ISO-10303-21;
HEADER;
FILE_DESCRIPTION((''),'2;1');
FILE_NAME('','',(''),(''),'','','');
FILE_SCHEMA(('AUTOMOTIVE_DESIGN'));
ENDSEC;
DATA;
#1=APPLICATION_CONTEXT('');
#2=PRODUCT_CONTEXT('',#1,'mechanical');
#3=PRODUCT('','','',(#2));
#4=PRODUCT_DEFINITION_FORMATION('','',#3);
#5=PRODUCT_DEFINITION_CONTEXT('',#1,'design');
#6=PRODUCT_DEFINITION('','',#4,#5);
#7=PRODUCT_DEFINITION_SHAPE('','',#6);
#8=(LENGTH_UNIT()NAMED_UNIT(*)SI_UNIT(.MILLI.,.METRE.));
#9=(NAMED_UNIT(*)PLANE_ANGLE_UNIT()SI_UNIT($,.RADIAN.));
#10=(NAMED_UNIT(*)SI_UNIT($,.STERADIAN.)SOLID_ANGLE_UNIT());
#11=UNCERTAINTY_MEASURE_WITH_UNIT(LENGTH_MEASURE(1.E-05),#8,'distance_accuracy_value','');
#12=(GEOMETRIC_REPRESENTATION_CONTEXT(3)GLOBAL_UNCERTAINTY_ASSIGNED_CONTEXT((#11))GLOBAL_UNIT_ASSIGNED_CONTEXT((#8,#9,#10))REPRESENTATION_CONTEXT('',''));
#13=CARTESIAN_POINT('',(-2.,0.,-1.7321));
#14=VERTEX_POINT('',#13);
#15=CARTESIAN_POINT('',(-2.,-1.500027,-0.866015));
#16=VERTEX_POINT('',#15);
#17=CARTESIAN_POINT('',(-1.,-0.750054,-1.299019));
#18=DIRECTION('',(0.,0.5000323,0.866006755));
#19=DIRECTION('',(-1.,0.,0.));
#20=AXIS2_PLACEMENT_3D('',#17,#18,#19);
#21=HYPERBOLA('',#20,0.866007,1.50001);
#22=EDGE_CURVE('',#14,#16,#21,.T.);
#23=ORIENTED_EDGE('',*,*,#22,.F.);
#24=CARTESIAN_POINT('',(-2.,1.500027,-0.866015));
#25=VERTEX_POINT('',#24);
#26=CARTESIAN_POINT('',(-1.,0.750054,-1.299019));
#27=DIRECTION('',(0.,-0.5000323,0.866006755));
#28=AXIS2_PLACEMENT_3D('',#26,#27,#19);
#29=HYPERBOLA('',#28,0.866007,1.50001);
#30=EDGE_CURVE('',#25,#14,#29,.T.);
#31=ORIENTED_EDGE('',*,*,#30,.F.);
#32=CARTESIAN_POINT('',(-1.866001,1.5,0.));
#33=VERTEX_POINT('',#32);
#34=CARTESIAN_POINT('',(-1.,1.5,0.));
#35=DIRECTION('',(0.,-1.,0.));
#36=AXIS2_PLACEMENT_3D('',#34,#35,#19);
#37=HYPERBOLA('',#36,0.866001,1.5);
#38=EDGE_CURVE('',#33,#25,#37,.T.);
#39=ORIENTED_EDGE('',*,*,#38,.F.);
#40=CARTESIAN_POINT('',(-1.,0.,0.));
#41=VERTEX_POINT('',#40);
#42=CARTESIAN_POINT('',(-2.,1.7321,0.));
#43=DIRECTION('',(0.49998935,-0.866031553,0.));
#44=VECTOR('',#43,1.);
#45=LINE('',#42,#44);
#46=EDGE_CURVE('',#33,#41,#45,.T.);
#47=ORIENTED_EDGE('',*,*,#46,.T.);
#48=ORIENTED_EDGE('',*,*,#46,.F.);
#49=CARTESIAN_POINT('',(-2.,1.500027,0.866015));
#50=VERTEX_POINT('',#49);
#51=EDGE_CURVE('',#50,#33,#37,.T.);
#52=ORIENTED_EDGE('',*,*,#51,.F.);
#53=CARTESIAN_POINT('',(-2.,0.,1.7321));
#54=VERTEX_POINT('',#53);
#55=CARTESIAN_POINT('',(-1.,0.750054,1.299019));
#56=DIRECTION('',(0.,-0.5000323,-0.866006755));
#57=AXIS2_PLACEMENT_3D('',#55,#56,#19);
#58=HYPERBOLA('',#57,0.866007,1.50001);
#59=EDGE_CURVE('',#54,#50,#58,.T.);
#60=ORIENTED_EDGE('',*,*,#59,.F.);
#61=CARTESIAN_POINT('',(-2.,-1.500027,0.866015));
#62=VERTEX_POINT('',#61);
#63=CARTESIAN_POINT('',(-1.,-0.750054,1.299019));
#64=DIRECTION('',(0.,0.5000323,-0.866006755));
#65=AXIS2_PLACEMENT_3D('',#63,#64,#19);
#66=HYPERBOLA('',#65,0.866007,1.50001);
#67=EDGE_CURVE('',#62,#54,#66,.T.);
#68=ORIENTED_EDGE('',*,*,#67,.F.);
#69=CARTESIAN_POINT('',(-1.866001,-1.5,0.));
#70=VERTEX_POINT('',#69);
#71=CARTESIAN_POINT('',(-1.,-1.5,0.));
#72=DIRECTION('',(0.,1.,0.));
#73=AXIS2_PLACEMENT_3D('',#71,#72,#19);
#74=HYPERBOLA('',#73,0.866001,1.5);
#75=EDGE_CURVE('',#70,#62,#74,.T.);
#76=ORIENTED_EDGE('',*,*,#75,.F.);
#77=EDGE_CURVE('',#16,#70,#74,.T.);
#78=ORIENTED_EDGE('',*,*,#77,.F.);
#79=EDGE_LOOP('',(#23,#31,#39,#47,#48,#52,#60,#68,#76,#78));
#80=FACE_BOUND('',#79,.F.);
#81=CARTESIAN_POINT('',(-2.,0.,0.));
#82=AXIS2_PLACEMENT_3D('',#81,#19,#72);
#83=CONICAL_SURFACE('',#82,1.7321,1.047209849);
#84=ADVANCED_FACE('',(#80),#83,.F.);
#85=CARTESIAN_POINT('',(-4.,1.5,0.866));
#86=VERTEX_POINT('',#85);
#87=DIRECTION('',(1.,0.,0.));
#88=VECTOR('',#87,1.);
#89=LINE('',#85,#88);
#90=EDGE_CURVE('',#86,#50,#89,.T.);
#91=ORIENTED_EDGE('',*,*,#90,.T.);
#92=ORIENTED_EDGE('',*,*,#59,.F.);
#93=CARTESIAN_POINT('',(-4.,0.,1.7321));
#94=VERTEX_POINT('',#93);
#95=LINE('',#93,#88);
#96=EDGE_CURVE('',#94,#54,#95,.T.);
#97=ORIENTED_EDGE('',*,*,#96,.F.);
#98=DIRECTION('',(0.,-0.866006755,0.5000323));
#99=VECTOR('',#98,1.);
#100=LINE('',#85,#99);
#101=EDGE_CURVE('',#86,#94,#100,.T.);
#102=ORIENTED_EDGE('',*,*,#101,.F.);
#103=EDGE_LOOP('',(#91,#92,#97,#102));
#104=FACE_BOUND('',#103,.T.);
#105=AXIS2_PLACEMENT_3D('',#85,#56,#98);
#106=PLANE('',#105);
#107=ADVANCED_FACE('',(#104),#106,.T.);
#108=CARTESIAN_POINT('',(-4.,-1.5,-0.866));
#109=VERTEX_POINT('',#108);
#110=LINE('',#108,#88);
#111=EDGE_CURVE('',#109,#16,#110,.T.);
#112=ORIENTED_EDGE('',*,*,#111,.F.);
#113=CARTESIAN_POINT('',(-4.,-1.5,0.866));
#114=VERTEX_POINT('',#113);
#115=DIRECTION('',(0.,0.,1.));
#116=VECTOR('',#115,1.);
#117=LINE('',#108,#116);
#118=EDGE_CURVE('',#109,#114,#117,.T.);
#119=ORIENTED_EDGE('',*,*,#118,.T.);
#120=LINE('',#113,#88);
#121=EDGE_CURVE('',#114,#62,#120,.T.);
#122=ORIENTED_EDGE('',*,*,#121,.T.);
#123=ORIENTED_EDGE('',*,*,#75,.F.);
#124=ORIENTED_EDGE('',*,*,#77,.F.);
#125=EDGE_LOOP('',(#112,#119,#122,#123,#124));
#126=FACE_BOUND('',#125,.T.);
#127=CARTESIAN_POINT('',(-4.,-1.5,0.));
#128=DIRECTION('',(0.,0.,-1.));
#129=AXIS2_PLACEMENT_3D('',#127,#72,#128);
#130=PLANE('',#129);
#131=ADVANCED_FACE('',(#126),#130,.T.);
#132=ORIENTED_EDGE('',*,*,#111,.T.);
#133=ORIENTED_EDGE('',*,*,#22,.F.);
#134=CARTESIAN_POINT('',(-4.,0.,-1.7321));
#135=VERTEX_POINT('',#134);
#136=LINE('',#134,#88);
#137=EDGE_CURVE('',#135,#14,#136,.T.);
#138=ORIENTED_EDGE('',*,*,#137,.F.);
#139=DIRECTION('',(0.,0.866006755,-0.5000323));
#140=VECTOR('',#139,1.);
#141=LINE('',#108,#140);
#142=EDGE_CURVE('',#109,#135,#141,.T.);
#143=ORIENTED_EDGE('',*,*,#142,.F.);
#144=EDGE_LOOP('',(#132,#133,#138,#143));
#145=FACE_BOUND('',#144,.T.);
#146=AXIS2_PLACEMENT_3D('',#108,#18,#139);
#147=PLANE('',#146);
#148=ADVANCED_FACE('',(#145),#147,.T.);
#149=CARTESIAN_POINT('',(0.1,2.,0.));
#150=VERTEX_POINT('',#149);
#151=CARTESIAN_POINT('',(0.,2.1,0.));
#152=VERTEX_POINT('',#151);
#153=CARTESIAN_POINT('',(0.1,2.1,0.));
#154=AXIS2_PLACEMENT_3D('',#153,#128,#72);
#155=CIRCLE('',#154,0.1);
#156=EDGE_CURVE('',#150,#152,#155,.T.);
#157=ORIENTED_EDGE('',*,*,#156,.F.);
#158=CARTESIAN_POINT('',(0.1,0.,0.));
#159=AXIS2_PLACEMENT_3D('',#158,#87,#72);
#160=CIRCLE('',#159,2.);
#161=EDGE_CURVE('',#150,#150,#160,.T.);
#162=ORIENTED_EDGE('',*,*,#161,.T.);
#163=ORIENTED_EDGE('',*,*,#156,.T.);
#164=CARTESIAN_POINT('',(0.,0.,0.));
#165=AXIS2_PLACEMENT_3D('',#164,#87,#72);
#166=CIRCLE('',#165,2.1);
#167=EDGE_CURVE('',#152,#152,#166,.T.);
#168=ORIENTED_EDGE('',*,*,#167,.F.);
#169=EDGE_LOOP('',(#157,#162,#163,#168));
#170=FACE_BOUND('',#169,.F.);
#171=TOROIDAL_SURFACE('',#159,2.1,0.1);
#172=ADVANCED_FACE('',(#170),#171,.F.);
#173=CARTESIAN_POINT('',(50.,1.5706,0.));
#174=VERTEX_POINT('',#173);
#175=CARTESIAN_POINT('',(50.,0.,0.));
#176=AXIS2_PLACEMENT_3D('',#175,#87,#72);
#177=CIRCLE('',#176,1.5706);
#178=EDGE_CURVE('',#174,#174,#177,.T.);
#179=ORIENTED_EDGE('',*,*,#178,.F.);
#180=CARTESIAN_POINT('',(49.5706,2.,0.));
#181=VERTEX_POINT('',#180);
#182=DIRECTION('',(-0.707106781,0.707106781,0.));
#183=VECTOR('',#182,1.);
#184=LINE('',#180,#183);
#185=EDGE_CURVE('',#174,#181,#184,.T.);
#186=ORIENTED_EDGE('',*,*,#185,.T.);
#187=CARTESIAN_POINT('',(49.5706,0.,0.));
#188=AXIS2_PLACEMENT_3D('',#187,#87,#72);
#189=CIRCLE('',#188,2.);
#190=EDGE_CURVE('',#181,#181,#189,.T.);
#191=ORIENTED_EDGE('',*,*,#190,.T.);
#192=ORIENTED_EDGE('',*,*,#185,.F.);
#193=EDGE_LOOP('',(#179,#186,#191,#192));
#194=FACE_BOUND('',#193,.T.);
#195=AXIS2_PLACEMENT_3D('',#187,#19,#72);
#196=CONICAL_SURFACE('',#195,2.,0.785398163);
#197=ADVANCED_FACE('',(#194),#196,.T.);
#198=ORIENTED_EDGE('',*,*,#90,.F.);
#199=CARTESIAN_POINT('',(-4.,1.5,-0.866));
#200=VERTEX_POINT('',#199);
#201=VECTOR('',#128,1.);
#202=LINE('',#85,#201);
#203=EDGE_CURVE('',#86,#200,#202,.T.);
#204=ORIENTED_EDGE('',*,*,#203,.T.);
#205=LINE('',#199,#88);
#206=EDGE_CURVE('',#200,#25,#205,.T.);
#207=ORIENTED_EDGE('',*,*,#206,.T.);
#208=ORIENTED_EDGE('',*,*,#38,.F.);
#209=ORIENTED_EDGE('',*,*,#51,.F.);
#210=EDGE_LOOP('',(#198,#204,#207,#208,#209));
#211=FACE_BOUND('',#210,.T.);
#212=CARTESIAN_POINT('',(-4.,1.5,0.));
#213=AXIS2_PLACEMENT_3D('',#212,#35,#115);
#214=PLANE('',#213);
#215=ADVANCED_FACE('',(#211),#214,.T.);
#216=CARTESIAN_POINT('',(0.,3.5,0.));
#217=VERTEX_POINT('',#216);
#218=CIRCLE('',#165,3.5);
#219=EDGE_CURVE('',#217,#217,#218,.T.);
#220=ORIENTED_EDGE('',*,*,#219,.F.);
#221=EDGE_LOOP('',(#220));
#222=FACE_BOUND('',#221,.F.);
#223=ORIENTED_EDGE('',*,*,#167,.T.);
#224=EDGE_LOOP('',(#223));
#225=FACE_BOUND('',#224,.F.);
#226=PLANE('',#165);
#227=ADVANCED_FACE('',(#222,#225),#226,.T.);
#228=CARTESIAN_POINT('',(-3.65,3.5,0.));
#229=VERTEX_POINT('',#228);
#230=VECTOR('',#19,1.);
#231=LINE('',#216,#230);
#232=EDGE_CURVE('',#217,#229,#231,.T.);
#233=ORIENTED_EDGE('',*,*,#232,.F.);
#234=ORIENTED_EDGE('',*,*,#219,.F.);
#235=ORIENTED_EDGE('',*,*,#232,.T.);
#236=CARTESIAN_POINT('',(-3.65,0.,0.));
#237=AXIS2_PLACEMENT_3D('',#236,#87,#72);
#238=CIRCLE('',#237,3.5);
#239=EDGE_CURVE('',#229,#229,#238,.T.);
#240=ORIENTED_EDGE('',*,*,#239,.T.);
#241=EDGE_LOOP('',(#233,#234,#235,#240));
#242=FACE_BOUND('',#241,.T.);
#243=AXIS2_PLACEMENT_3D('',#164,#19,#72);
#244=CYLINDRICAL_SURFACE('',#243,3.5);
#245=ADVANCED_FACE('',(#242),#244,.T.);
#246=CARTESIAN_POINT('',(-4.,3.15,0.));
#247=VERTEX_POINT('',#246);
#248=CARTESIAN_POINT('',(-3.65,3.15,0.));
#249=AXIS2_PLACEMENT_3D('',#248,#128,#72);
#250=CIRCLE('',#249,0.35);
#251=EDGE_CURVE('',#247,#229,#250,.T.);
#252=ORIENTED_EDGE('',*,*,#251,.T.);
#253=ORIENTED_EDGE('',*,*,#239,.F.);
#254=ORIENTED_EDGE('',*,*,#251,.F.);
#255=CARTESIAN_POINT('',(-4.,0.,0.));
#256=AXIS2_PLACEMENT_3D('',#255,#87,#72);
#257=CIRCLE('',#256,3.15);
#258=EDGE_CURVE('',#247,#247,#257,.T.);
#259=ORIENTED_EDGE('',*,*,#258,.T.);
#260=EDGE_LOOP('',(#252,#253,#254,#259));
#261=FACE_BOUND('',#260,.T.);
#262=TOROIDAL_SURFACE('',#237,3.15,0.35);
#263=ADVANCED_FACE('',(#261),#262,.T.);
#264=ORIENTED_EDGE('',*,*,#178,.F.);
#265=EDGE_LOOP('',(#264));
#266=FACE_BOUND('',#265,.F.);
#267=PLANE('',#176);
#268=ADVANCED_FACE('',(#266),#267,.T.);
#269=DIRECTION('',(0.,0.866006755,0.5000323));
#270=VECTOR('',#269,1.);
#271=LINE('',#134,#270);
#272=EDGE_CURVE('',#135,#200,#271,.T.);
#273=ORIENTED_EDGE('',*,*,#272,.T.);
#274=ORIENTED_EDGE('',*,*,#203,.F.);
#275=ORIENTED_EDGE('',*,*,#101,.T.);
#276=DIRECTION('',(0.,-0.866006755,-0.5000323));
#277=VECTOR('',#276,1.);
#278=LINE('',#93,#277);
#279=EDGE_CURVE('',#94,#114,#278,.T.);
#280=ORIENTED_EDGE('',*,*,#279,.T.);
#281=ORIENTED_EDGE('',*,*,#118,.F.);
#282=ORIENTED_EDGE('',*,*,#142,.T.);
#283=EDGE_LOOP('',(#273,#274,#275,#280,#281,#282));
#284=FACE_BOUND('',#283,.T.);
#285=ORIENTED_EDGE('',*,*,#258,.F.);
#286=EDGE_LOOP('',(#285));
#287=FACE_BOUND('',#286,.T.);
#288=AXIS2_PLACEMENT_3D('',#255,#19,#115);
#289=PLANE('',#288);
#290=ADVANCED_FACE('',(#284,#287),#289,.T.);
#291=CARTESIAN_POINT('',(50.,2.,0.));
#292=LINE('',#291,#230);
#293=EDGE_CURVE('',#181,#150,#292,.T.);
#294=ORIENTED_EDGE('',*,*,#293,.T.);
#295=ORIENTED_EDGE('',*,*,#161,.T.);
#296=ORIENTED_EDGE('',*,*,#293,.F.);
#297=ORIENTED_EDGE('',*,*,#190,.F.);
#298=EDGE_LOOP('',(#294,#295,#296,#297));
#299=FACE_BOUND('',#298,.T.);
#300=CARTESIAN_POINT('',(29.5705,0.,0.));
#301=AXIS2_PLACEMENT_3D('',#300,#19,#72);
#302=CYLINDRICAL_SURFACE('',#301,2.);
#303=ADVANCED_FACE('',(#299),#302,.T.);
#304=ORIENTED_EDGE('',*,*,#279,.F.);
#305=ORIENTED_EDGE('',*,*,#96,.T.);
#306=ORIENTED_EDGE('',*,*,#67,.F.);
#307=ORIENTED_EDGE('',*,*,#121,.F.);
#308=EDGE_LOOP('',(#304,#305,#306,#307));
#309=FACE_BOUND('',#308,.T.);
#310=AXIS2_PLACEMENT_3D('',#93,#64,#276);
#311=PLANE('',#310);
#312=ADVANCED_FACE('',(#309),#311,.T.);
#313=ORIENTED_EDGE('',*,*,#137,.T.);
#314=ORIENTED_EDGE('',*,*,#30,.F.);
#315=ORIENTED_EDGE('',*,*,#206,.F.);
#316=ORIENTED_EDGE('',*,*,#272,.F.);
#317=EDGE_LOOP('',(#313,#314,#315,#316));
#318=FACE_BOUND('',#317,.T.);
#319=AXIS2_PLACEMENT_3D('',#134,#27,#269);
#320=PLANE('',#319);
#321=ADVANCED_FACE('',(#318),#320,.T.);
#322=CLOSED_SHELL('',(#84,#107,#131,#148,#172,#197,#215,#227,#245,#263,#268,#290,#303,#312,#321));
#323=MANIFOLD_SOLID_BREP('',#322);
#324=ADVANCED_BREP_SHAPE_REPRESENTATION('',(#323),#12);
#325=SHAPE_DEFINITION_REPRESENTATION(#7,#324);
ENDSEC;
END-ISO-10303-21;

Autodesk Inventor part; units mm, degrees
ref_plane "YZ Plane" through (0, 0, 0) normal (1, 0, 0) x (0, 1, 0)
ref_plane "XZ Plane" through (0, 0, 0) normal (0, 1, 0) x (-1, 0, 0)
sketch "Sketch1" plane through (0, 0, 0) normal (0, 0, 1) x (1, 0, 0)
  line L0 (-1, 0) -> (50, 0)
  line L1 (50, 0) -> (50, 2)
  line L2 (50, 2) -> (30, 2)
  line L3 (30, 2) -> (29.5705, 2)
  line L4 (29.5705, 2) -> (0, 2)
  line L5 (0, 2) -> (0, 3.5)
  line L6 (0, 3.5) -> (-4, 3.5)
  line L7 (-4, 3.5) -> (-4, 1.7321)
  line L8 (-4, 1.7321) -> (-2, 1.7321)
  line L9 (-2, 1.7321) -> (-1, 0)
  line L10 (-14.8, 0) -> (60.8, 0) projected
  line L11 (0, -0.7) -> (0, 4.2) projected
  line L12 (30, 2) -> (0, 2) construction
  dimension "d1" = 20
  dimension "d2" = 0.4295
  dimension "d3" = 4
  dimension "d4" = 2
  dimension "d5" = 60
  dimension "d6" = 4
  dimension "d7" = 4
  dimension "d8" = 3.4641
  dimension "d9" = 7
  dimension "d26" = 50
revolve "Body" add sketch "Sketch1" angle 360 about axis through (-1, 0, 0) along (1, 0, 0)
sketch "Sketch2" plane through (-4, 0, 0) normal (-1, 0, 0) x (0, 0, 1)
  circle A0 centre (0, 0) radius 1.7321 projected
  line L0 (0, -4.9) -> (0, 4.9) projected
  line L1 (-4.9, 0) -> (4.9, 0) projected
  line L2 (1.7321, 0) -> (0.866, -1.5)
  line L3 (0.866, -1.5) -> (-0.866, -1.5)
  line L4 (-0.866, -1.5) -> (-1.7321, 0)
  line L5 (-1.7321, 0) -> (-0.866, 1.5)
  line L6 (-0.866, 1.5) -> (0.866, 1.5)
  line L7 (0.866, 1.5) -> (1.7321, 0)
extrude "Slot" add sketch "Sketch2" against normal up to next contours L7 A0 | A0 L2 | L6 L0 A0 | A0 L0 L3 | L0 L6 A0 | A0 L3 L0 | L4 A0 | A0 L5
fillet "Fillet1" radius 0.35 1 edges at (-4, -3.5, 0)
thread "Thread" size "M4x0.7" class "6g" standard "ISO Metric profile" length 20
chamfer "Chamfer1" distance 0.4294 distance2 0.4294 1 edges at (50, -2, 0) measured on face at (50, -0.8158, 0.4805)
ref_plane "Work Plane1" through (29, 0, 0) normal (0, -1, 0) x (1, 0, 0)
fillet "Fillet2" radius 0.1 1 edges at (0, -2, 0)
equation "\"d1\" = GEL"
equation "\"d3\" = KOH"
equation "\"d4\" = INTI"
equation "\"d6\" = GD"
equation "\"d7\" = BDM"
equation "\"d8\" = 1.1547 * SW"
equation "\"d9\" = KOD"
equation "\"d26\" = NLG"
equation "\"d30\" = R"
equation "\"d17\" = RR"
equation "\"d13\" = GEL"
equation "\"d15\" = -0.5 * SPD + 0.5 * GD"
equation "\"d16\" = GUL"
equation "\"GD\" = NND"
equation "\"NLG\" = 50"
equation "\"GEL\" = 20"
equation "\"KOD\" = 7"
equation "\"KOH\" = NND"
equation "\"INTI\" = 2"
equation "\"GAL\" = 0.61345 * PTC"
equation "\"GUL\" = 0.61345 * PTC"
equation "\"BDM\" = NND"
equation "\"SW\" = 3"
equation "\"RR\" = 0.35"
equation "\"SPD\" = NND - 1.2269 * PTC"
equation "\"R\" = 0.1"
equation "\"PHH\" = 0.1 * NND"
equation "\"GD1\" = THREADDIA - 1.2269 * PTC"
equation "\"THREADDIA\" = 4"
equation "\"FAWI\" = 45deg"
equation "\"PTC\" = 0.7"
equation "\"NND\" = 4"
equation "\"FAWI1\" = 30deg"
equation "\"TOA\" = 30deg"
equation "\"E0\" = 1.155 * SW"
properties part number "Unbrako - M4 x 50" material "Steel, Mild"
